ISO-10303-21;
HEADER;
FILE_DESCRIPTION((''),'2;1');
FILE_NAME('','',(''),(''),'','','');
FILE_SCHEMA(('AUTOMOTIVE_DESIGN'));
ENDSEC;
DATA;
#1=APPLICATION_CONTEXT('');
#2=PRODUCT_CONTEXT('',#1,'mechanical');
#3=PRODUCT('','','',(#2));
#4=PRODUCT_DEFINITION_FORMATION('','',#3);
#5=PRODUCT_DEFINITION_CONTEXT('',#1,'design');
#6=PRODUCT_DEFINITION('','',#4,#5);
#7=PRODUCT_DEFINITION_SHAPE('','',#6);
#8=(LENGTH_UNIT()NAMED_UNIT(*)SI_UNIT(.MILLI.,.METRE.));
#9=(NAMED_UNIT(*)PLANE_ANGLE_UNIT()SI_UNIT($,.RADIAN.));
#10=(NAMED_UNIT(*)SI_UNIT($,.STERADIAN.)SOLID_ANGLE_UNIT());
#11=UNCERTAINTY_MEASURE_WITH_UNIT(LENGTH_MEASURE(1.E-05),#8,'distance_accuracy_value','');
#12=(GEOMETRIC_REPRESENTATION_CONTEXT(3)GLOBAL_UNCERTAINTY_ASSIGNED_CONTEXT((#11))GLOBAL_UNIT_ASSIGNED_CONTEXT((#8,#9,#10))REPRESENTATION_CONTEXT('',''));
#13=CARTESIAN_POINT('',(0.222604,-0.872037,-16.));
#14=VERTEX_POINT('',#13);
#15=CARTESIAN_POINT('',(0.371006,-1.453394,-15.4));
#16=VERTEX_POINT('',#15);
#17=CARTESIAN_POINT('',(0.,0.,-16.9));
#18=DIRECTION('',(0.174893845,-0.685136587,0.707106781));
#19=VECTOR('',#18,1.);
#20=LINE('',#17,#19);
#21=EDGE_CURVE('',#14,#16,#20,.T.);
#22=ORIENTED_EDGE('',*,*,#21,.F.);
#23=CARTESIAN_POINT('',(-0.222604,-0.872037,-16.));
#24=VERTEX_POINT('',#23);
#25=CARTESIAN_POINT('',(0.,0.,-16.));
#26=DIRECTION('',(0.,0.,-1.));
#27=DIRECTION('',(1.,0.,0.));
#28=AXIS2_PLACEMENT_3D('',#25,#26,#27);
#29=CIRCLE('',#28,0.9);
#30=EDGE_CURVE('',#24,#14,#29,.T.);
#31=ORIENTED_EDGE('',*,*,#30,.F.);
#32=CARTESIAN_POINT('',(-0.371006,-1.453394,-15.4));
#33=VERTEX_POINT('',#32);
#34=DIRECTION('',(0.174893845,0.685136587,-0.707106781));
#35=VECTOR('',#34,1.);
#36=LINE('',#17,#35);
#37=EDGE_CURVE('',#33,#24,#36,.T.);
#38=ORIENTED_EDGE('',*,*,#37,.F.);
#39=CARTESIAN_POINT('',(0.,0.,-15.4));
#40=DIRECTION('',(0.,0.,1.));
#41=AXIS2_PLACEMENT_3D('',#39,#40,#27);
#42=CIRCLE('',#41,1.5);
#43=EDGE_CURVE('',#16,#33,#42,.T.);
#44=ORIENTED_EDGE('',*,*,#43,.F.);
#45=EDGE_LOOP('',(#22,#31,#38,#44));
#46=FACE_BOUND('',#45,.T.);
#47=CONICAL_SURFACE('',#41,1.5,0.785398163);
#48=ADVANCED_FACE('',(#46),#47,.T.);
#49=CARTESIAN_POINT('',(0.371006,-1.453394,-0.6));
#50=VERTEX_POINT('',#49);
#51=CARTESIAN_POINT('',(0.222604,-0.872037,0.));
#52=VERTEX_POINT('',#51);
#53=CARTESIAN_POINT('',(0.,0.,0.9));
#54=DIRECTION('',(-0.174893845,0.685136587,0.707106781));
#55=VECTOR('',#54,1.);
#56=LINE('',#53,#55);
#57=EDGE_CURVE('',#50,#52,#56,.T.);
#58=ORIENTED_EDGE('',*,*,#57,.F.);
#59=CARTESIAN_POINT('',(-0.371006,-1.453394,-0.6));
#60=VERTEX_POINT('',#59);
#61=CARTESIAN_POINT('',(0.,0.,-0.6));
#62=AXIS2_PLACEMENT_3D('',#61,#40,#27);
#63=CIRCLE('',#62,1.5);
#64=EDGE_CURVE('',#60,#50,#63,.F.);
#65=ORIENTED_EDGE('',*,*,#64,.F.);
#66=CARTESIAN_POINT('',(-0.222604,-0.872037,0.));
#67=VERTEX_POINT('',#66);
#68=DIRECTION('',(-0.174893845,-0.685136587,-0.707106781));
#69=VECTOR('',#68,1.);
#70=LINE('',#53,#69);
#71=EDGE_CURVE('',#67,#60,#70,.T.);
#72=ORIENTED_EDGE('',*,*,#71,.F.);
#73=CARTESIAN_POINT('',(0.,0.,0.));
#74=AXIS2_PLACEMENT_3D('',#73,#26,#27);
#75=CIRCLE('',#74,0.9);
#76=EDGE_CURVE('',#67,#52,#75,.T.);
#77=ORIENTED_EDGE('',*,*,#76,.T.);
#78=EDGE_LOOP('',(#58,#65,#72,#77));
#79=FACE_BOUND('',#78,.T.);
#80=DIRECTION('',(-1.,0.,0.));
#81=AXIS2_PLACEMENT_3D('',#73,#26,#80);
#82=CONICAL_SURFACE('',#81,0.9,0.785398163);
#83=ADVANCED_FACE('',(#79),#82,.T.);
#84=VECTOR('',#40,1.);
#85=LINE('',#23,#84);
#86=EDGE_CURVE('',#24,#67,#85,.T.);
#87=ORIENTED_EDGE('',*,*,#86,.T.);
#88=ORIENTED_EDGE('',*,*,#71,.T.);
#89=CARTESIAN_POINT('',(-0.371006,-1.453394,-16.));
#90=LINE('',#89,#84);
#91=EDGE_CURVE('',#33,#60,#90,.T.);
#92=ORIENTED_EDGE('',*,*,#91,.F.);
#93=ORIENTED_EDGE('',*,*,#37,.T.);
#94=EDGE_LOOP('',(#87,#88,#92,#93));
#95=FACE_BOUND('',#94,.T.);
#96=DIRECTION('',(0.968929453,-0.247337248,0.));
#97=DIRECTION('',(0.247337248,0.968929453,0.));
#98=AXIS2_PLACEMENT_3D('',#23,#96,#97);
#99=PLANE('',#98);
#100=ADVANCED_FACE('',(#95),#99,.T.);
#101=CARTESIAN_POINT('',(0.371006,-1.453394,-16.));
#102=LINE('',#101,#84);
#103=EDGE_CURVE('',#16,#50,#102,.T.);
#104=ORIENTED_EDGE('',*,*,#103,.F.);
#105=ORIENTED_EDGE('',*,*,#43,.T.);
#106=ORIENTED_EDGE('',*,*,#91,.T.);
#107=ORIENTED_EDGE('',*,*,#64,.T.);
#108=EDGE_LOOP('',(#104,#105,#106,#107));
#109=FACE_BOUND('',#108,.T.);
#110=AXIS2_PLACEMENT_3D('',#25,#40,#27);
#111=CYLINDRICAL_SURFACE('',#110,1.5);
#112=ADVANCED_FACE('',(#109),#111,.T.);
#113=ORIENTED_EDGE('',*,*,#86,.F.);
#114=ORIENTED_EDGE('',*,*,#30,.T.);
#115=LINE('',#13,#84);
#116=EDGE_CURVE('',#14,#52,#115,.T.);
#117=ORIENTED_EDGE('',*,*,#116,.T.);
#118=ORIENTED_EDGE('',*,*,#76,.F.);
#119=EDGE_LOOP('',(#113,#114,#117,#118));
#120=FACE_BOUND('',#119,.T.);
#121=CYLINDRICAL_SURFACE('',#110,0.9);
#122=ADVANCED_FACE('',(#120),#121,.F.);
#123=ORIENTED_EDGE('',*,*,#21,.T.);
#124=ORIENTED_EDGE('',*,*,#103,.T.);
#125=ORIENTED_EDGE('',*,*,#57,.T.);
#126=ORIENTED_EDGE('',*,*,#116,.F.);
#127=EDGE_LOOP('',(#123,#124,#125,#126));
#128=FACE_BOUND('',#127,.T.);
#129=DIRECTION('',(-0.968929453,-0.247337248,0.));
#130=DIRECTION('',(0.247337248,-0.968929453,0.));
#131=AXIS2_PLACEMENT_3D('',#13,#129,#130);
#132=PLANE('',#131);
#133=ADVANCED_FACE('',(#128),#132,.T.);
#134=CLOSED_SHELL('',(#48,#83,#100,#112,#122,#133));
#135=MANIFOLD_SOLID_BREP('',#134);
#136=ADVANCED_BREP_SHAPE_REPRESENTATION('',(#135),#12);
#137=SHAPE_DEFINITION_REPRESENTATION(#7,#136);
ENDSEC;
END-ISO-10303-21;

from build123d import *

# Parameters (mm, degrees)
BASE_EXTRUSION_DEPTH = 16
CHANFREIN1_SIZE      = 0.6


with BuildPart() as part:
    # Esquisse1 → Base-Extrusion (new body)
    with BuildSketch(Plane.XY):
        with BuildLine():
            Line((-0.222603523, -0.872036508), (-0.371005872, -1.45339418))
            ThreePointArc((-0.371005872, -1.45339418), (0, 1.5), (0.371005872, -1.45339418))
            Line((0.371005872, -1.45339418), (0.222603523, -0.872036508))
            ThreePointArc((0.222603523, -0.872036508), (0, 0.9), (-0.222603523, -0.872036508))
        make_face()
    extrude(amount=-BASE_EXTRUSION_DEPTH)

    # Chanfrein1
    chanfrein1_edges = [part.edges().sort_by_distance(p)[0] for p in [
        (0, 1.5, 0),
        (0, 1.5, -16),
    ]]
    chamfer(chanfrein1_edges, length=CHANFREIN1_SIZE - 0.0001)  # a hair under: the kernel refuses the full size


solid = part.part
